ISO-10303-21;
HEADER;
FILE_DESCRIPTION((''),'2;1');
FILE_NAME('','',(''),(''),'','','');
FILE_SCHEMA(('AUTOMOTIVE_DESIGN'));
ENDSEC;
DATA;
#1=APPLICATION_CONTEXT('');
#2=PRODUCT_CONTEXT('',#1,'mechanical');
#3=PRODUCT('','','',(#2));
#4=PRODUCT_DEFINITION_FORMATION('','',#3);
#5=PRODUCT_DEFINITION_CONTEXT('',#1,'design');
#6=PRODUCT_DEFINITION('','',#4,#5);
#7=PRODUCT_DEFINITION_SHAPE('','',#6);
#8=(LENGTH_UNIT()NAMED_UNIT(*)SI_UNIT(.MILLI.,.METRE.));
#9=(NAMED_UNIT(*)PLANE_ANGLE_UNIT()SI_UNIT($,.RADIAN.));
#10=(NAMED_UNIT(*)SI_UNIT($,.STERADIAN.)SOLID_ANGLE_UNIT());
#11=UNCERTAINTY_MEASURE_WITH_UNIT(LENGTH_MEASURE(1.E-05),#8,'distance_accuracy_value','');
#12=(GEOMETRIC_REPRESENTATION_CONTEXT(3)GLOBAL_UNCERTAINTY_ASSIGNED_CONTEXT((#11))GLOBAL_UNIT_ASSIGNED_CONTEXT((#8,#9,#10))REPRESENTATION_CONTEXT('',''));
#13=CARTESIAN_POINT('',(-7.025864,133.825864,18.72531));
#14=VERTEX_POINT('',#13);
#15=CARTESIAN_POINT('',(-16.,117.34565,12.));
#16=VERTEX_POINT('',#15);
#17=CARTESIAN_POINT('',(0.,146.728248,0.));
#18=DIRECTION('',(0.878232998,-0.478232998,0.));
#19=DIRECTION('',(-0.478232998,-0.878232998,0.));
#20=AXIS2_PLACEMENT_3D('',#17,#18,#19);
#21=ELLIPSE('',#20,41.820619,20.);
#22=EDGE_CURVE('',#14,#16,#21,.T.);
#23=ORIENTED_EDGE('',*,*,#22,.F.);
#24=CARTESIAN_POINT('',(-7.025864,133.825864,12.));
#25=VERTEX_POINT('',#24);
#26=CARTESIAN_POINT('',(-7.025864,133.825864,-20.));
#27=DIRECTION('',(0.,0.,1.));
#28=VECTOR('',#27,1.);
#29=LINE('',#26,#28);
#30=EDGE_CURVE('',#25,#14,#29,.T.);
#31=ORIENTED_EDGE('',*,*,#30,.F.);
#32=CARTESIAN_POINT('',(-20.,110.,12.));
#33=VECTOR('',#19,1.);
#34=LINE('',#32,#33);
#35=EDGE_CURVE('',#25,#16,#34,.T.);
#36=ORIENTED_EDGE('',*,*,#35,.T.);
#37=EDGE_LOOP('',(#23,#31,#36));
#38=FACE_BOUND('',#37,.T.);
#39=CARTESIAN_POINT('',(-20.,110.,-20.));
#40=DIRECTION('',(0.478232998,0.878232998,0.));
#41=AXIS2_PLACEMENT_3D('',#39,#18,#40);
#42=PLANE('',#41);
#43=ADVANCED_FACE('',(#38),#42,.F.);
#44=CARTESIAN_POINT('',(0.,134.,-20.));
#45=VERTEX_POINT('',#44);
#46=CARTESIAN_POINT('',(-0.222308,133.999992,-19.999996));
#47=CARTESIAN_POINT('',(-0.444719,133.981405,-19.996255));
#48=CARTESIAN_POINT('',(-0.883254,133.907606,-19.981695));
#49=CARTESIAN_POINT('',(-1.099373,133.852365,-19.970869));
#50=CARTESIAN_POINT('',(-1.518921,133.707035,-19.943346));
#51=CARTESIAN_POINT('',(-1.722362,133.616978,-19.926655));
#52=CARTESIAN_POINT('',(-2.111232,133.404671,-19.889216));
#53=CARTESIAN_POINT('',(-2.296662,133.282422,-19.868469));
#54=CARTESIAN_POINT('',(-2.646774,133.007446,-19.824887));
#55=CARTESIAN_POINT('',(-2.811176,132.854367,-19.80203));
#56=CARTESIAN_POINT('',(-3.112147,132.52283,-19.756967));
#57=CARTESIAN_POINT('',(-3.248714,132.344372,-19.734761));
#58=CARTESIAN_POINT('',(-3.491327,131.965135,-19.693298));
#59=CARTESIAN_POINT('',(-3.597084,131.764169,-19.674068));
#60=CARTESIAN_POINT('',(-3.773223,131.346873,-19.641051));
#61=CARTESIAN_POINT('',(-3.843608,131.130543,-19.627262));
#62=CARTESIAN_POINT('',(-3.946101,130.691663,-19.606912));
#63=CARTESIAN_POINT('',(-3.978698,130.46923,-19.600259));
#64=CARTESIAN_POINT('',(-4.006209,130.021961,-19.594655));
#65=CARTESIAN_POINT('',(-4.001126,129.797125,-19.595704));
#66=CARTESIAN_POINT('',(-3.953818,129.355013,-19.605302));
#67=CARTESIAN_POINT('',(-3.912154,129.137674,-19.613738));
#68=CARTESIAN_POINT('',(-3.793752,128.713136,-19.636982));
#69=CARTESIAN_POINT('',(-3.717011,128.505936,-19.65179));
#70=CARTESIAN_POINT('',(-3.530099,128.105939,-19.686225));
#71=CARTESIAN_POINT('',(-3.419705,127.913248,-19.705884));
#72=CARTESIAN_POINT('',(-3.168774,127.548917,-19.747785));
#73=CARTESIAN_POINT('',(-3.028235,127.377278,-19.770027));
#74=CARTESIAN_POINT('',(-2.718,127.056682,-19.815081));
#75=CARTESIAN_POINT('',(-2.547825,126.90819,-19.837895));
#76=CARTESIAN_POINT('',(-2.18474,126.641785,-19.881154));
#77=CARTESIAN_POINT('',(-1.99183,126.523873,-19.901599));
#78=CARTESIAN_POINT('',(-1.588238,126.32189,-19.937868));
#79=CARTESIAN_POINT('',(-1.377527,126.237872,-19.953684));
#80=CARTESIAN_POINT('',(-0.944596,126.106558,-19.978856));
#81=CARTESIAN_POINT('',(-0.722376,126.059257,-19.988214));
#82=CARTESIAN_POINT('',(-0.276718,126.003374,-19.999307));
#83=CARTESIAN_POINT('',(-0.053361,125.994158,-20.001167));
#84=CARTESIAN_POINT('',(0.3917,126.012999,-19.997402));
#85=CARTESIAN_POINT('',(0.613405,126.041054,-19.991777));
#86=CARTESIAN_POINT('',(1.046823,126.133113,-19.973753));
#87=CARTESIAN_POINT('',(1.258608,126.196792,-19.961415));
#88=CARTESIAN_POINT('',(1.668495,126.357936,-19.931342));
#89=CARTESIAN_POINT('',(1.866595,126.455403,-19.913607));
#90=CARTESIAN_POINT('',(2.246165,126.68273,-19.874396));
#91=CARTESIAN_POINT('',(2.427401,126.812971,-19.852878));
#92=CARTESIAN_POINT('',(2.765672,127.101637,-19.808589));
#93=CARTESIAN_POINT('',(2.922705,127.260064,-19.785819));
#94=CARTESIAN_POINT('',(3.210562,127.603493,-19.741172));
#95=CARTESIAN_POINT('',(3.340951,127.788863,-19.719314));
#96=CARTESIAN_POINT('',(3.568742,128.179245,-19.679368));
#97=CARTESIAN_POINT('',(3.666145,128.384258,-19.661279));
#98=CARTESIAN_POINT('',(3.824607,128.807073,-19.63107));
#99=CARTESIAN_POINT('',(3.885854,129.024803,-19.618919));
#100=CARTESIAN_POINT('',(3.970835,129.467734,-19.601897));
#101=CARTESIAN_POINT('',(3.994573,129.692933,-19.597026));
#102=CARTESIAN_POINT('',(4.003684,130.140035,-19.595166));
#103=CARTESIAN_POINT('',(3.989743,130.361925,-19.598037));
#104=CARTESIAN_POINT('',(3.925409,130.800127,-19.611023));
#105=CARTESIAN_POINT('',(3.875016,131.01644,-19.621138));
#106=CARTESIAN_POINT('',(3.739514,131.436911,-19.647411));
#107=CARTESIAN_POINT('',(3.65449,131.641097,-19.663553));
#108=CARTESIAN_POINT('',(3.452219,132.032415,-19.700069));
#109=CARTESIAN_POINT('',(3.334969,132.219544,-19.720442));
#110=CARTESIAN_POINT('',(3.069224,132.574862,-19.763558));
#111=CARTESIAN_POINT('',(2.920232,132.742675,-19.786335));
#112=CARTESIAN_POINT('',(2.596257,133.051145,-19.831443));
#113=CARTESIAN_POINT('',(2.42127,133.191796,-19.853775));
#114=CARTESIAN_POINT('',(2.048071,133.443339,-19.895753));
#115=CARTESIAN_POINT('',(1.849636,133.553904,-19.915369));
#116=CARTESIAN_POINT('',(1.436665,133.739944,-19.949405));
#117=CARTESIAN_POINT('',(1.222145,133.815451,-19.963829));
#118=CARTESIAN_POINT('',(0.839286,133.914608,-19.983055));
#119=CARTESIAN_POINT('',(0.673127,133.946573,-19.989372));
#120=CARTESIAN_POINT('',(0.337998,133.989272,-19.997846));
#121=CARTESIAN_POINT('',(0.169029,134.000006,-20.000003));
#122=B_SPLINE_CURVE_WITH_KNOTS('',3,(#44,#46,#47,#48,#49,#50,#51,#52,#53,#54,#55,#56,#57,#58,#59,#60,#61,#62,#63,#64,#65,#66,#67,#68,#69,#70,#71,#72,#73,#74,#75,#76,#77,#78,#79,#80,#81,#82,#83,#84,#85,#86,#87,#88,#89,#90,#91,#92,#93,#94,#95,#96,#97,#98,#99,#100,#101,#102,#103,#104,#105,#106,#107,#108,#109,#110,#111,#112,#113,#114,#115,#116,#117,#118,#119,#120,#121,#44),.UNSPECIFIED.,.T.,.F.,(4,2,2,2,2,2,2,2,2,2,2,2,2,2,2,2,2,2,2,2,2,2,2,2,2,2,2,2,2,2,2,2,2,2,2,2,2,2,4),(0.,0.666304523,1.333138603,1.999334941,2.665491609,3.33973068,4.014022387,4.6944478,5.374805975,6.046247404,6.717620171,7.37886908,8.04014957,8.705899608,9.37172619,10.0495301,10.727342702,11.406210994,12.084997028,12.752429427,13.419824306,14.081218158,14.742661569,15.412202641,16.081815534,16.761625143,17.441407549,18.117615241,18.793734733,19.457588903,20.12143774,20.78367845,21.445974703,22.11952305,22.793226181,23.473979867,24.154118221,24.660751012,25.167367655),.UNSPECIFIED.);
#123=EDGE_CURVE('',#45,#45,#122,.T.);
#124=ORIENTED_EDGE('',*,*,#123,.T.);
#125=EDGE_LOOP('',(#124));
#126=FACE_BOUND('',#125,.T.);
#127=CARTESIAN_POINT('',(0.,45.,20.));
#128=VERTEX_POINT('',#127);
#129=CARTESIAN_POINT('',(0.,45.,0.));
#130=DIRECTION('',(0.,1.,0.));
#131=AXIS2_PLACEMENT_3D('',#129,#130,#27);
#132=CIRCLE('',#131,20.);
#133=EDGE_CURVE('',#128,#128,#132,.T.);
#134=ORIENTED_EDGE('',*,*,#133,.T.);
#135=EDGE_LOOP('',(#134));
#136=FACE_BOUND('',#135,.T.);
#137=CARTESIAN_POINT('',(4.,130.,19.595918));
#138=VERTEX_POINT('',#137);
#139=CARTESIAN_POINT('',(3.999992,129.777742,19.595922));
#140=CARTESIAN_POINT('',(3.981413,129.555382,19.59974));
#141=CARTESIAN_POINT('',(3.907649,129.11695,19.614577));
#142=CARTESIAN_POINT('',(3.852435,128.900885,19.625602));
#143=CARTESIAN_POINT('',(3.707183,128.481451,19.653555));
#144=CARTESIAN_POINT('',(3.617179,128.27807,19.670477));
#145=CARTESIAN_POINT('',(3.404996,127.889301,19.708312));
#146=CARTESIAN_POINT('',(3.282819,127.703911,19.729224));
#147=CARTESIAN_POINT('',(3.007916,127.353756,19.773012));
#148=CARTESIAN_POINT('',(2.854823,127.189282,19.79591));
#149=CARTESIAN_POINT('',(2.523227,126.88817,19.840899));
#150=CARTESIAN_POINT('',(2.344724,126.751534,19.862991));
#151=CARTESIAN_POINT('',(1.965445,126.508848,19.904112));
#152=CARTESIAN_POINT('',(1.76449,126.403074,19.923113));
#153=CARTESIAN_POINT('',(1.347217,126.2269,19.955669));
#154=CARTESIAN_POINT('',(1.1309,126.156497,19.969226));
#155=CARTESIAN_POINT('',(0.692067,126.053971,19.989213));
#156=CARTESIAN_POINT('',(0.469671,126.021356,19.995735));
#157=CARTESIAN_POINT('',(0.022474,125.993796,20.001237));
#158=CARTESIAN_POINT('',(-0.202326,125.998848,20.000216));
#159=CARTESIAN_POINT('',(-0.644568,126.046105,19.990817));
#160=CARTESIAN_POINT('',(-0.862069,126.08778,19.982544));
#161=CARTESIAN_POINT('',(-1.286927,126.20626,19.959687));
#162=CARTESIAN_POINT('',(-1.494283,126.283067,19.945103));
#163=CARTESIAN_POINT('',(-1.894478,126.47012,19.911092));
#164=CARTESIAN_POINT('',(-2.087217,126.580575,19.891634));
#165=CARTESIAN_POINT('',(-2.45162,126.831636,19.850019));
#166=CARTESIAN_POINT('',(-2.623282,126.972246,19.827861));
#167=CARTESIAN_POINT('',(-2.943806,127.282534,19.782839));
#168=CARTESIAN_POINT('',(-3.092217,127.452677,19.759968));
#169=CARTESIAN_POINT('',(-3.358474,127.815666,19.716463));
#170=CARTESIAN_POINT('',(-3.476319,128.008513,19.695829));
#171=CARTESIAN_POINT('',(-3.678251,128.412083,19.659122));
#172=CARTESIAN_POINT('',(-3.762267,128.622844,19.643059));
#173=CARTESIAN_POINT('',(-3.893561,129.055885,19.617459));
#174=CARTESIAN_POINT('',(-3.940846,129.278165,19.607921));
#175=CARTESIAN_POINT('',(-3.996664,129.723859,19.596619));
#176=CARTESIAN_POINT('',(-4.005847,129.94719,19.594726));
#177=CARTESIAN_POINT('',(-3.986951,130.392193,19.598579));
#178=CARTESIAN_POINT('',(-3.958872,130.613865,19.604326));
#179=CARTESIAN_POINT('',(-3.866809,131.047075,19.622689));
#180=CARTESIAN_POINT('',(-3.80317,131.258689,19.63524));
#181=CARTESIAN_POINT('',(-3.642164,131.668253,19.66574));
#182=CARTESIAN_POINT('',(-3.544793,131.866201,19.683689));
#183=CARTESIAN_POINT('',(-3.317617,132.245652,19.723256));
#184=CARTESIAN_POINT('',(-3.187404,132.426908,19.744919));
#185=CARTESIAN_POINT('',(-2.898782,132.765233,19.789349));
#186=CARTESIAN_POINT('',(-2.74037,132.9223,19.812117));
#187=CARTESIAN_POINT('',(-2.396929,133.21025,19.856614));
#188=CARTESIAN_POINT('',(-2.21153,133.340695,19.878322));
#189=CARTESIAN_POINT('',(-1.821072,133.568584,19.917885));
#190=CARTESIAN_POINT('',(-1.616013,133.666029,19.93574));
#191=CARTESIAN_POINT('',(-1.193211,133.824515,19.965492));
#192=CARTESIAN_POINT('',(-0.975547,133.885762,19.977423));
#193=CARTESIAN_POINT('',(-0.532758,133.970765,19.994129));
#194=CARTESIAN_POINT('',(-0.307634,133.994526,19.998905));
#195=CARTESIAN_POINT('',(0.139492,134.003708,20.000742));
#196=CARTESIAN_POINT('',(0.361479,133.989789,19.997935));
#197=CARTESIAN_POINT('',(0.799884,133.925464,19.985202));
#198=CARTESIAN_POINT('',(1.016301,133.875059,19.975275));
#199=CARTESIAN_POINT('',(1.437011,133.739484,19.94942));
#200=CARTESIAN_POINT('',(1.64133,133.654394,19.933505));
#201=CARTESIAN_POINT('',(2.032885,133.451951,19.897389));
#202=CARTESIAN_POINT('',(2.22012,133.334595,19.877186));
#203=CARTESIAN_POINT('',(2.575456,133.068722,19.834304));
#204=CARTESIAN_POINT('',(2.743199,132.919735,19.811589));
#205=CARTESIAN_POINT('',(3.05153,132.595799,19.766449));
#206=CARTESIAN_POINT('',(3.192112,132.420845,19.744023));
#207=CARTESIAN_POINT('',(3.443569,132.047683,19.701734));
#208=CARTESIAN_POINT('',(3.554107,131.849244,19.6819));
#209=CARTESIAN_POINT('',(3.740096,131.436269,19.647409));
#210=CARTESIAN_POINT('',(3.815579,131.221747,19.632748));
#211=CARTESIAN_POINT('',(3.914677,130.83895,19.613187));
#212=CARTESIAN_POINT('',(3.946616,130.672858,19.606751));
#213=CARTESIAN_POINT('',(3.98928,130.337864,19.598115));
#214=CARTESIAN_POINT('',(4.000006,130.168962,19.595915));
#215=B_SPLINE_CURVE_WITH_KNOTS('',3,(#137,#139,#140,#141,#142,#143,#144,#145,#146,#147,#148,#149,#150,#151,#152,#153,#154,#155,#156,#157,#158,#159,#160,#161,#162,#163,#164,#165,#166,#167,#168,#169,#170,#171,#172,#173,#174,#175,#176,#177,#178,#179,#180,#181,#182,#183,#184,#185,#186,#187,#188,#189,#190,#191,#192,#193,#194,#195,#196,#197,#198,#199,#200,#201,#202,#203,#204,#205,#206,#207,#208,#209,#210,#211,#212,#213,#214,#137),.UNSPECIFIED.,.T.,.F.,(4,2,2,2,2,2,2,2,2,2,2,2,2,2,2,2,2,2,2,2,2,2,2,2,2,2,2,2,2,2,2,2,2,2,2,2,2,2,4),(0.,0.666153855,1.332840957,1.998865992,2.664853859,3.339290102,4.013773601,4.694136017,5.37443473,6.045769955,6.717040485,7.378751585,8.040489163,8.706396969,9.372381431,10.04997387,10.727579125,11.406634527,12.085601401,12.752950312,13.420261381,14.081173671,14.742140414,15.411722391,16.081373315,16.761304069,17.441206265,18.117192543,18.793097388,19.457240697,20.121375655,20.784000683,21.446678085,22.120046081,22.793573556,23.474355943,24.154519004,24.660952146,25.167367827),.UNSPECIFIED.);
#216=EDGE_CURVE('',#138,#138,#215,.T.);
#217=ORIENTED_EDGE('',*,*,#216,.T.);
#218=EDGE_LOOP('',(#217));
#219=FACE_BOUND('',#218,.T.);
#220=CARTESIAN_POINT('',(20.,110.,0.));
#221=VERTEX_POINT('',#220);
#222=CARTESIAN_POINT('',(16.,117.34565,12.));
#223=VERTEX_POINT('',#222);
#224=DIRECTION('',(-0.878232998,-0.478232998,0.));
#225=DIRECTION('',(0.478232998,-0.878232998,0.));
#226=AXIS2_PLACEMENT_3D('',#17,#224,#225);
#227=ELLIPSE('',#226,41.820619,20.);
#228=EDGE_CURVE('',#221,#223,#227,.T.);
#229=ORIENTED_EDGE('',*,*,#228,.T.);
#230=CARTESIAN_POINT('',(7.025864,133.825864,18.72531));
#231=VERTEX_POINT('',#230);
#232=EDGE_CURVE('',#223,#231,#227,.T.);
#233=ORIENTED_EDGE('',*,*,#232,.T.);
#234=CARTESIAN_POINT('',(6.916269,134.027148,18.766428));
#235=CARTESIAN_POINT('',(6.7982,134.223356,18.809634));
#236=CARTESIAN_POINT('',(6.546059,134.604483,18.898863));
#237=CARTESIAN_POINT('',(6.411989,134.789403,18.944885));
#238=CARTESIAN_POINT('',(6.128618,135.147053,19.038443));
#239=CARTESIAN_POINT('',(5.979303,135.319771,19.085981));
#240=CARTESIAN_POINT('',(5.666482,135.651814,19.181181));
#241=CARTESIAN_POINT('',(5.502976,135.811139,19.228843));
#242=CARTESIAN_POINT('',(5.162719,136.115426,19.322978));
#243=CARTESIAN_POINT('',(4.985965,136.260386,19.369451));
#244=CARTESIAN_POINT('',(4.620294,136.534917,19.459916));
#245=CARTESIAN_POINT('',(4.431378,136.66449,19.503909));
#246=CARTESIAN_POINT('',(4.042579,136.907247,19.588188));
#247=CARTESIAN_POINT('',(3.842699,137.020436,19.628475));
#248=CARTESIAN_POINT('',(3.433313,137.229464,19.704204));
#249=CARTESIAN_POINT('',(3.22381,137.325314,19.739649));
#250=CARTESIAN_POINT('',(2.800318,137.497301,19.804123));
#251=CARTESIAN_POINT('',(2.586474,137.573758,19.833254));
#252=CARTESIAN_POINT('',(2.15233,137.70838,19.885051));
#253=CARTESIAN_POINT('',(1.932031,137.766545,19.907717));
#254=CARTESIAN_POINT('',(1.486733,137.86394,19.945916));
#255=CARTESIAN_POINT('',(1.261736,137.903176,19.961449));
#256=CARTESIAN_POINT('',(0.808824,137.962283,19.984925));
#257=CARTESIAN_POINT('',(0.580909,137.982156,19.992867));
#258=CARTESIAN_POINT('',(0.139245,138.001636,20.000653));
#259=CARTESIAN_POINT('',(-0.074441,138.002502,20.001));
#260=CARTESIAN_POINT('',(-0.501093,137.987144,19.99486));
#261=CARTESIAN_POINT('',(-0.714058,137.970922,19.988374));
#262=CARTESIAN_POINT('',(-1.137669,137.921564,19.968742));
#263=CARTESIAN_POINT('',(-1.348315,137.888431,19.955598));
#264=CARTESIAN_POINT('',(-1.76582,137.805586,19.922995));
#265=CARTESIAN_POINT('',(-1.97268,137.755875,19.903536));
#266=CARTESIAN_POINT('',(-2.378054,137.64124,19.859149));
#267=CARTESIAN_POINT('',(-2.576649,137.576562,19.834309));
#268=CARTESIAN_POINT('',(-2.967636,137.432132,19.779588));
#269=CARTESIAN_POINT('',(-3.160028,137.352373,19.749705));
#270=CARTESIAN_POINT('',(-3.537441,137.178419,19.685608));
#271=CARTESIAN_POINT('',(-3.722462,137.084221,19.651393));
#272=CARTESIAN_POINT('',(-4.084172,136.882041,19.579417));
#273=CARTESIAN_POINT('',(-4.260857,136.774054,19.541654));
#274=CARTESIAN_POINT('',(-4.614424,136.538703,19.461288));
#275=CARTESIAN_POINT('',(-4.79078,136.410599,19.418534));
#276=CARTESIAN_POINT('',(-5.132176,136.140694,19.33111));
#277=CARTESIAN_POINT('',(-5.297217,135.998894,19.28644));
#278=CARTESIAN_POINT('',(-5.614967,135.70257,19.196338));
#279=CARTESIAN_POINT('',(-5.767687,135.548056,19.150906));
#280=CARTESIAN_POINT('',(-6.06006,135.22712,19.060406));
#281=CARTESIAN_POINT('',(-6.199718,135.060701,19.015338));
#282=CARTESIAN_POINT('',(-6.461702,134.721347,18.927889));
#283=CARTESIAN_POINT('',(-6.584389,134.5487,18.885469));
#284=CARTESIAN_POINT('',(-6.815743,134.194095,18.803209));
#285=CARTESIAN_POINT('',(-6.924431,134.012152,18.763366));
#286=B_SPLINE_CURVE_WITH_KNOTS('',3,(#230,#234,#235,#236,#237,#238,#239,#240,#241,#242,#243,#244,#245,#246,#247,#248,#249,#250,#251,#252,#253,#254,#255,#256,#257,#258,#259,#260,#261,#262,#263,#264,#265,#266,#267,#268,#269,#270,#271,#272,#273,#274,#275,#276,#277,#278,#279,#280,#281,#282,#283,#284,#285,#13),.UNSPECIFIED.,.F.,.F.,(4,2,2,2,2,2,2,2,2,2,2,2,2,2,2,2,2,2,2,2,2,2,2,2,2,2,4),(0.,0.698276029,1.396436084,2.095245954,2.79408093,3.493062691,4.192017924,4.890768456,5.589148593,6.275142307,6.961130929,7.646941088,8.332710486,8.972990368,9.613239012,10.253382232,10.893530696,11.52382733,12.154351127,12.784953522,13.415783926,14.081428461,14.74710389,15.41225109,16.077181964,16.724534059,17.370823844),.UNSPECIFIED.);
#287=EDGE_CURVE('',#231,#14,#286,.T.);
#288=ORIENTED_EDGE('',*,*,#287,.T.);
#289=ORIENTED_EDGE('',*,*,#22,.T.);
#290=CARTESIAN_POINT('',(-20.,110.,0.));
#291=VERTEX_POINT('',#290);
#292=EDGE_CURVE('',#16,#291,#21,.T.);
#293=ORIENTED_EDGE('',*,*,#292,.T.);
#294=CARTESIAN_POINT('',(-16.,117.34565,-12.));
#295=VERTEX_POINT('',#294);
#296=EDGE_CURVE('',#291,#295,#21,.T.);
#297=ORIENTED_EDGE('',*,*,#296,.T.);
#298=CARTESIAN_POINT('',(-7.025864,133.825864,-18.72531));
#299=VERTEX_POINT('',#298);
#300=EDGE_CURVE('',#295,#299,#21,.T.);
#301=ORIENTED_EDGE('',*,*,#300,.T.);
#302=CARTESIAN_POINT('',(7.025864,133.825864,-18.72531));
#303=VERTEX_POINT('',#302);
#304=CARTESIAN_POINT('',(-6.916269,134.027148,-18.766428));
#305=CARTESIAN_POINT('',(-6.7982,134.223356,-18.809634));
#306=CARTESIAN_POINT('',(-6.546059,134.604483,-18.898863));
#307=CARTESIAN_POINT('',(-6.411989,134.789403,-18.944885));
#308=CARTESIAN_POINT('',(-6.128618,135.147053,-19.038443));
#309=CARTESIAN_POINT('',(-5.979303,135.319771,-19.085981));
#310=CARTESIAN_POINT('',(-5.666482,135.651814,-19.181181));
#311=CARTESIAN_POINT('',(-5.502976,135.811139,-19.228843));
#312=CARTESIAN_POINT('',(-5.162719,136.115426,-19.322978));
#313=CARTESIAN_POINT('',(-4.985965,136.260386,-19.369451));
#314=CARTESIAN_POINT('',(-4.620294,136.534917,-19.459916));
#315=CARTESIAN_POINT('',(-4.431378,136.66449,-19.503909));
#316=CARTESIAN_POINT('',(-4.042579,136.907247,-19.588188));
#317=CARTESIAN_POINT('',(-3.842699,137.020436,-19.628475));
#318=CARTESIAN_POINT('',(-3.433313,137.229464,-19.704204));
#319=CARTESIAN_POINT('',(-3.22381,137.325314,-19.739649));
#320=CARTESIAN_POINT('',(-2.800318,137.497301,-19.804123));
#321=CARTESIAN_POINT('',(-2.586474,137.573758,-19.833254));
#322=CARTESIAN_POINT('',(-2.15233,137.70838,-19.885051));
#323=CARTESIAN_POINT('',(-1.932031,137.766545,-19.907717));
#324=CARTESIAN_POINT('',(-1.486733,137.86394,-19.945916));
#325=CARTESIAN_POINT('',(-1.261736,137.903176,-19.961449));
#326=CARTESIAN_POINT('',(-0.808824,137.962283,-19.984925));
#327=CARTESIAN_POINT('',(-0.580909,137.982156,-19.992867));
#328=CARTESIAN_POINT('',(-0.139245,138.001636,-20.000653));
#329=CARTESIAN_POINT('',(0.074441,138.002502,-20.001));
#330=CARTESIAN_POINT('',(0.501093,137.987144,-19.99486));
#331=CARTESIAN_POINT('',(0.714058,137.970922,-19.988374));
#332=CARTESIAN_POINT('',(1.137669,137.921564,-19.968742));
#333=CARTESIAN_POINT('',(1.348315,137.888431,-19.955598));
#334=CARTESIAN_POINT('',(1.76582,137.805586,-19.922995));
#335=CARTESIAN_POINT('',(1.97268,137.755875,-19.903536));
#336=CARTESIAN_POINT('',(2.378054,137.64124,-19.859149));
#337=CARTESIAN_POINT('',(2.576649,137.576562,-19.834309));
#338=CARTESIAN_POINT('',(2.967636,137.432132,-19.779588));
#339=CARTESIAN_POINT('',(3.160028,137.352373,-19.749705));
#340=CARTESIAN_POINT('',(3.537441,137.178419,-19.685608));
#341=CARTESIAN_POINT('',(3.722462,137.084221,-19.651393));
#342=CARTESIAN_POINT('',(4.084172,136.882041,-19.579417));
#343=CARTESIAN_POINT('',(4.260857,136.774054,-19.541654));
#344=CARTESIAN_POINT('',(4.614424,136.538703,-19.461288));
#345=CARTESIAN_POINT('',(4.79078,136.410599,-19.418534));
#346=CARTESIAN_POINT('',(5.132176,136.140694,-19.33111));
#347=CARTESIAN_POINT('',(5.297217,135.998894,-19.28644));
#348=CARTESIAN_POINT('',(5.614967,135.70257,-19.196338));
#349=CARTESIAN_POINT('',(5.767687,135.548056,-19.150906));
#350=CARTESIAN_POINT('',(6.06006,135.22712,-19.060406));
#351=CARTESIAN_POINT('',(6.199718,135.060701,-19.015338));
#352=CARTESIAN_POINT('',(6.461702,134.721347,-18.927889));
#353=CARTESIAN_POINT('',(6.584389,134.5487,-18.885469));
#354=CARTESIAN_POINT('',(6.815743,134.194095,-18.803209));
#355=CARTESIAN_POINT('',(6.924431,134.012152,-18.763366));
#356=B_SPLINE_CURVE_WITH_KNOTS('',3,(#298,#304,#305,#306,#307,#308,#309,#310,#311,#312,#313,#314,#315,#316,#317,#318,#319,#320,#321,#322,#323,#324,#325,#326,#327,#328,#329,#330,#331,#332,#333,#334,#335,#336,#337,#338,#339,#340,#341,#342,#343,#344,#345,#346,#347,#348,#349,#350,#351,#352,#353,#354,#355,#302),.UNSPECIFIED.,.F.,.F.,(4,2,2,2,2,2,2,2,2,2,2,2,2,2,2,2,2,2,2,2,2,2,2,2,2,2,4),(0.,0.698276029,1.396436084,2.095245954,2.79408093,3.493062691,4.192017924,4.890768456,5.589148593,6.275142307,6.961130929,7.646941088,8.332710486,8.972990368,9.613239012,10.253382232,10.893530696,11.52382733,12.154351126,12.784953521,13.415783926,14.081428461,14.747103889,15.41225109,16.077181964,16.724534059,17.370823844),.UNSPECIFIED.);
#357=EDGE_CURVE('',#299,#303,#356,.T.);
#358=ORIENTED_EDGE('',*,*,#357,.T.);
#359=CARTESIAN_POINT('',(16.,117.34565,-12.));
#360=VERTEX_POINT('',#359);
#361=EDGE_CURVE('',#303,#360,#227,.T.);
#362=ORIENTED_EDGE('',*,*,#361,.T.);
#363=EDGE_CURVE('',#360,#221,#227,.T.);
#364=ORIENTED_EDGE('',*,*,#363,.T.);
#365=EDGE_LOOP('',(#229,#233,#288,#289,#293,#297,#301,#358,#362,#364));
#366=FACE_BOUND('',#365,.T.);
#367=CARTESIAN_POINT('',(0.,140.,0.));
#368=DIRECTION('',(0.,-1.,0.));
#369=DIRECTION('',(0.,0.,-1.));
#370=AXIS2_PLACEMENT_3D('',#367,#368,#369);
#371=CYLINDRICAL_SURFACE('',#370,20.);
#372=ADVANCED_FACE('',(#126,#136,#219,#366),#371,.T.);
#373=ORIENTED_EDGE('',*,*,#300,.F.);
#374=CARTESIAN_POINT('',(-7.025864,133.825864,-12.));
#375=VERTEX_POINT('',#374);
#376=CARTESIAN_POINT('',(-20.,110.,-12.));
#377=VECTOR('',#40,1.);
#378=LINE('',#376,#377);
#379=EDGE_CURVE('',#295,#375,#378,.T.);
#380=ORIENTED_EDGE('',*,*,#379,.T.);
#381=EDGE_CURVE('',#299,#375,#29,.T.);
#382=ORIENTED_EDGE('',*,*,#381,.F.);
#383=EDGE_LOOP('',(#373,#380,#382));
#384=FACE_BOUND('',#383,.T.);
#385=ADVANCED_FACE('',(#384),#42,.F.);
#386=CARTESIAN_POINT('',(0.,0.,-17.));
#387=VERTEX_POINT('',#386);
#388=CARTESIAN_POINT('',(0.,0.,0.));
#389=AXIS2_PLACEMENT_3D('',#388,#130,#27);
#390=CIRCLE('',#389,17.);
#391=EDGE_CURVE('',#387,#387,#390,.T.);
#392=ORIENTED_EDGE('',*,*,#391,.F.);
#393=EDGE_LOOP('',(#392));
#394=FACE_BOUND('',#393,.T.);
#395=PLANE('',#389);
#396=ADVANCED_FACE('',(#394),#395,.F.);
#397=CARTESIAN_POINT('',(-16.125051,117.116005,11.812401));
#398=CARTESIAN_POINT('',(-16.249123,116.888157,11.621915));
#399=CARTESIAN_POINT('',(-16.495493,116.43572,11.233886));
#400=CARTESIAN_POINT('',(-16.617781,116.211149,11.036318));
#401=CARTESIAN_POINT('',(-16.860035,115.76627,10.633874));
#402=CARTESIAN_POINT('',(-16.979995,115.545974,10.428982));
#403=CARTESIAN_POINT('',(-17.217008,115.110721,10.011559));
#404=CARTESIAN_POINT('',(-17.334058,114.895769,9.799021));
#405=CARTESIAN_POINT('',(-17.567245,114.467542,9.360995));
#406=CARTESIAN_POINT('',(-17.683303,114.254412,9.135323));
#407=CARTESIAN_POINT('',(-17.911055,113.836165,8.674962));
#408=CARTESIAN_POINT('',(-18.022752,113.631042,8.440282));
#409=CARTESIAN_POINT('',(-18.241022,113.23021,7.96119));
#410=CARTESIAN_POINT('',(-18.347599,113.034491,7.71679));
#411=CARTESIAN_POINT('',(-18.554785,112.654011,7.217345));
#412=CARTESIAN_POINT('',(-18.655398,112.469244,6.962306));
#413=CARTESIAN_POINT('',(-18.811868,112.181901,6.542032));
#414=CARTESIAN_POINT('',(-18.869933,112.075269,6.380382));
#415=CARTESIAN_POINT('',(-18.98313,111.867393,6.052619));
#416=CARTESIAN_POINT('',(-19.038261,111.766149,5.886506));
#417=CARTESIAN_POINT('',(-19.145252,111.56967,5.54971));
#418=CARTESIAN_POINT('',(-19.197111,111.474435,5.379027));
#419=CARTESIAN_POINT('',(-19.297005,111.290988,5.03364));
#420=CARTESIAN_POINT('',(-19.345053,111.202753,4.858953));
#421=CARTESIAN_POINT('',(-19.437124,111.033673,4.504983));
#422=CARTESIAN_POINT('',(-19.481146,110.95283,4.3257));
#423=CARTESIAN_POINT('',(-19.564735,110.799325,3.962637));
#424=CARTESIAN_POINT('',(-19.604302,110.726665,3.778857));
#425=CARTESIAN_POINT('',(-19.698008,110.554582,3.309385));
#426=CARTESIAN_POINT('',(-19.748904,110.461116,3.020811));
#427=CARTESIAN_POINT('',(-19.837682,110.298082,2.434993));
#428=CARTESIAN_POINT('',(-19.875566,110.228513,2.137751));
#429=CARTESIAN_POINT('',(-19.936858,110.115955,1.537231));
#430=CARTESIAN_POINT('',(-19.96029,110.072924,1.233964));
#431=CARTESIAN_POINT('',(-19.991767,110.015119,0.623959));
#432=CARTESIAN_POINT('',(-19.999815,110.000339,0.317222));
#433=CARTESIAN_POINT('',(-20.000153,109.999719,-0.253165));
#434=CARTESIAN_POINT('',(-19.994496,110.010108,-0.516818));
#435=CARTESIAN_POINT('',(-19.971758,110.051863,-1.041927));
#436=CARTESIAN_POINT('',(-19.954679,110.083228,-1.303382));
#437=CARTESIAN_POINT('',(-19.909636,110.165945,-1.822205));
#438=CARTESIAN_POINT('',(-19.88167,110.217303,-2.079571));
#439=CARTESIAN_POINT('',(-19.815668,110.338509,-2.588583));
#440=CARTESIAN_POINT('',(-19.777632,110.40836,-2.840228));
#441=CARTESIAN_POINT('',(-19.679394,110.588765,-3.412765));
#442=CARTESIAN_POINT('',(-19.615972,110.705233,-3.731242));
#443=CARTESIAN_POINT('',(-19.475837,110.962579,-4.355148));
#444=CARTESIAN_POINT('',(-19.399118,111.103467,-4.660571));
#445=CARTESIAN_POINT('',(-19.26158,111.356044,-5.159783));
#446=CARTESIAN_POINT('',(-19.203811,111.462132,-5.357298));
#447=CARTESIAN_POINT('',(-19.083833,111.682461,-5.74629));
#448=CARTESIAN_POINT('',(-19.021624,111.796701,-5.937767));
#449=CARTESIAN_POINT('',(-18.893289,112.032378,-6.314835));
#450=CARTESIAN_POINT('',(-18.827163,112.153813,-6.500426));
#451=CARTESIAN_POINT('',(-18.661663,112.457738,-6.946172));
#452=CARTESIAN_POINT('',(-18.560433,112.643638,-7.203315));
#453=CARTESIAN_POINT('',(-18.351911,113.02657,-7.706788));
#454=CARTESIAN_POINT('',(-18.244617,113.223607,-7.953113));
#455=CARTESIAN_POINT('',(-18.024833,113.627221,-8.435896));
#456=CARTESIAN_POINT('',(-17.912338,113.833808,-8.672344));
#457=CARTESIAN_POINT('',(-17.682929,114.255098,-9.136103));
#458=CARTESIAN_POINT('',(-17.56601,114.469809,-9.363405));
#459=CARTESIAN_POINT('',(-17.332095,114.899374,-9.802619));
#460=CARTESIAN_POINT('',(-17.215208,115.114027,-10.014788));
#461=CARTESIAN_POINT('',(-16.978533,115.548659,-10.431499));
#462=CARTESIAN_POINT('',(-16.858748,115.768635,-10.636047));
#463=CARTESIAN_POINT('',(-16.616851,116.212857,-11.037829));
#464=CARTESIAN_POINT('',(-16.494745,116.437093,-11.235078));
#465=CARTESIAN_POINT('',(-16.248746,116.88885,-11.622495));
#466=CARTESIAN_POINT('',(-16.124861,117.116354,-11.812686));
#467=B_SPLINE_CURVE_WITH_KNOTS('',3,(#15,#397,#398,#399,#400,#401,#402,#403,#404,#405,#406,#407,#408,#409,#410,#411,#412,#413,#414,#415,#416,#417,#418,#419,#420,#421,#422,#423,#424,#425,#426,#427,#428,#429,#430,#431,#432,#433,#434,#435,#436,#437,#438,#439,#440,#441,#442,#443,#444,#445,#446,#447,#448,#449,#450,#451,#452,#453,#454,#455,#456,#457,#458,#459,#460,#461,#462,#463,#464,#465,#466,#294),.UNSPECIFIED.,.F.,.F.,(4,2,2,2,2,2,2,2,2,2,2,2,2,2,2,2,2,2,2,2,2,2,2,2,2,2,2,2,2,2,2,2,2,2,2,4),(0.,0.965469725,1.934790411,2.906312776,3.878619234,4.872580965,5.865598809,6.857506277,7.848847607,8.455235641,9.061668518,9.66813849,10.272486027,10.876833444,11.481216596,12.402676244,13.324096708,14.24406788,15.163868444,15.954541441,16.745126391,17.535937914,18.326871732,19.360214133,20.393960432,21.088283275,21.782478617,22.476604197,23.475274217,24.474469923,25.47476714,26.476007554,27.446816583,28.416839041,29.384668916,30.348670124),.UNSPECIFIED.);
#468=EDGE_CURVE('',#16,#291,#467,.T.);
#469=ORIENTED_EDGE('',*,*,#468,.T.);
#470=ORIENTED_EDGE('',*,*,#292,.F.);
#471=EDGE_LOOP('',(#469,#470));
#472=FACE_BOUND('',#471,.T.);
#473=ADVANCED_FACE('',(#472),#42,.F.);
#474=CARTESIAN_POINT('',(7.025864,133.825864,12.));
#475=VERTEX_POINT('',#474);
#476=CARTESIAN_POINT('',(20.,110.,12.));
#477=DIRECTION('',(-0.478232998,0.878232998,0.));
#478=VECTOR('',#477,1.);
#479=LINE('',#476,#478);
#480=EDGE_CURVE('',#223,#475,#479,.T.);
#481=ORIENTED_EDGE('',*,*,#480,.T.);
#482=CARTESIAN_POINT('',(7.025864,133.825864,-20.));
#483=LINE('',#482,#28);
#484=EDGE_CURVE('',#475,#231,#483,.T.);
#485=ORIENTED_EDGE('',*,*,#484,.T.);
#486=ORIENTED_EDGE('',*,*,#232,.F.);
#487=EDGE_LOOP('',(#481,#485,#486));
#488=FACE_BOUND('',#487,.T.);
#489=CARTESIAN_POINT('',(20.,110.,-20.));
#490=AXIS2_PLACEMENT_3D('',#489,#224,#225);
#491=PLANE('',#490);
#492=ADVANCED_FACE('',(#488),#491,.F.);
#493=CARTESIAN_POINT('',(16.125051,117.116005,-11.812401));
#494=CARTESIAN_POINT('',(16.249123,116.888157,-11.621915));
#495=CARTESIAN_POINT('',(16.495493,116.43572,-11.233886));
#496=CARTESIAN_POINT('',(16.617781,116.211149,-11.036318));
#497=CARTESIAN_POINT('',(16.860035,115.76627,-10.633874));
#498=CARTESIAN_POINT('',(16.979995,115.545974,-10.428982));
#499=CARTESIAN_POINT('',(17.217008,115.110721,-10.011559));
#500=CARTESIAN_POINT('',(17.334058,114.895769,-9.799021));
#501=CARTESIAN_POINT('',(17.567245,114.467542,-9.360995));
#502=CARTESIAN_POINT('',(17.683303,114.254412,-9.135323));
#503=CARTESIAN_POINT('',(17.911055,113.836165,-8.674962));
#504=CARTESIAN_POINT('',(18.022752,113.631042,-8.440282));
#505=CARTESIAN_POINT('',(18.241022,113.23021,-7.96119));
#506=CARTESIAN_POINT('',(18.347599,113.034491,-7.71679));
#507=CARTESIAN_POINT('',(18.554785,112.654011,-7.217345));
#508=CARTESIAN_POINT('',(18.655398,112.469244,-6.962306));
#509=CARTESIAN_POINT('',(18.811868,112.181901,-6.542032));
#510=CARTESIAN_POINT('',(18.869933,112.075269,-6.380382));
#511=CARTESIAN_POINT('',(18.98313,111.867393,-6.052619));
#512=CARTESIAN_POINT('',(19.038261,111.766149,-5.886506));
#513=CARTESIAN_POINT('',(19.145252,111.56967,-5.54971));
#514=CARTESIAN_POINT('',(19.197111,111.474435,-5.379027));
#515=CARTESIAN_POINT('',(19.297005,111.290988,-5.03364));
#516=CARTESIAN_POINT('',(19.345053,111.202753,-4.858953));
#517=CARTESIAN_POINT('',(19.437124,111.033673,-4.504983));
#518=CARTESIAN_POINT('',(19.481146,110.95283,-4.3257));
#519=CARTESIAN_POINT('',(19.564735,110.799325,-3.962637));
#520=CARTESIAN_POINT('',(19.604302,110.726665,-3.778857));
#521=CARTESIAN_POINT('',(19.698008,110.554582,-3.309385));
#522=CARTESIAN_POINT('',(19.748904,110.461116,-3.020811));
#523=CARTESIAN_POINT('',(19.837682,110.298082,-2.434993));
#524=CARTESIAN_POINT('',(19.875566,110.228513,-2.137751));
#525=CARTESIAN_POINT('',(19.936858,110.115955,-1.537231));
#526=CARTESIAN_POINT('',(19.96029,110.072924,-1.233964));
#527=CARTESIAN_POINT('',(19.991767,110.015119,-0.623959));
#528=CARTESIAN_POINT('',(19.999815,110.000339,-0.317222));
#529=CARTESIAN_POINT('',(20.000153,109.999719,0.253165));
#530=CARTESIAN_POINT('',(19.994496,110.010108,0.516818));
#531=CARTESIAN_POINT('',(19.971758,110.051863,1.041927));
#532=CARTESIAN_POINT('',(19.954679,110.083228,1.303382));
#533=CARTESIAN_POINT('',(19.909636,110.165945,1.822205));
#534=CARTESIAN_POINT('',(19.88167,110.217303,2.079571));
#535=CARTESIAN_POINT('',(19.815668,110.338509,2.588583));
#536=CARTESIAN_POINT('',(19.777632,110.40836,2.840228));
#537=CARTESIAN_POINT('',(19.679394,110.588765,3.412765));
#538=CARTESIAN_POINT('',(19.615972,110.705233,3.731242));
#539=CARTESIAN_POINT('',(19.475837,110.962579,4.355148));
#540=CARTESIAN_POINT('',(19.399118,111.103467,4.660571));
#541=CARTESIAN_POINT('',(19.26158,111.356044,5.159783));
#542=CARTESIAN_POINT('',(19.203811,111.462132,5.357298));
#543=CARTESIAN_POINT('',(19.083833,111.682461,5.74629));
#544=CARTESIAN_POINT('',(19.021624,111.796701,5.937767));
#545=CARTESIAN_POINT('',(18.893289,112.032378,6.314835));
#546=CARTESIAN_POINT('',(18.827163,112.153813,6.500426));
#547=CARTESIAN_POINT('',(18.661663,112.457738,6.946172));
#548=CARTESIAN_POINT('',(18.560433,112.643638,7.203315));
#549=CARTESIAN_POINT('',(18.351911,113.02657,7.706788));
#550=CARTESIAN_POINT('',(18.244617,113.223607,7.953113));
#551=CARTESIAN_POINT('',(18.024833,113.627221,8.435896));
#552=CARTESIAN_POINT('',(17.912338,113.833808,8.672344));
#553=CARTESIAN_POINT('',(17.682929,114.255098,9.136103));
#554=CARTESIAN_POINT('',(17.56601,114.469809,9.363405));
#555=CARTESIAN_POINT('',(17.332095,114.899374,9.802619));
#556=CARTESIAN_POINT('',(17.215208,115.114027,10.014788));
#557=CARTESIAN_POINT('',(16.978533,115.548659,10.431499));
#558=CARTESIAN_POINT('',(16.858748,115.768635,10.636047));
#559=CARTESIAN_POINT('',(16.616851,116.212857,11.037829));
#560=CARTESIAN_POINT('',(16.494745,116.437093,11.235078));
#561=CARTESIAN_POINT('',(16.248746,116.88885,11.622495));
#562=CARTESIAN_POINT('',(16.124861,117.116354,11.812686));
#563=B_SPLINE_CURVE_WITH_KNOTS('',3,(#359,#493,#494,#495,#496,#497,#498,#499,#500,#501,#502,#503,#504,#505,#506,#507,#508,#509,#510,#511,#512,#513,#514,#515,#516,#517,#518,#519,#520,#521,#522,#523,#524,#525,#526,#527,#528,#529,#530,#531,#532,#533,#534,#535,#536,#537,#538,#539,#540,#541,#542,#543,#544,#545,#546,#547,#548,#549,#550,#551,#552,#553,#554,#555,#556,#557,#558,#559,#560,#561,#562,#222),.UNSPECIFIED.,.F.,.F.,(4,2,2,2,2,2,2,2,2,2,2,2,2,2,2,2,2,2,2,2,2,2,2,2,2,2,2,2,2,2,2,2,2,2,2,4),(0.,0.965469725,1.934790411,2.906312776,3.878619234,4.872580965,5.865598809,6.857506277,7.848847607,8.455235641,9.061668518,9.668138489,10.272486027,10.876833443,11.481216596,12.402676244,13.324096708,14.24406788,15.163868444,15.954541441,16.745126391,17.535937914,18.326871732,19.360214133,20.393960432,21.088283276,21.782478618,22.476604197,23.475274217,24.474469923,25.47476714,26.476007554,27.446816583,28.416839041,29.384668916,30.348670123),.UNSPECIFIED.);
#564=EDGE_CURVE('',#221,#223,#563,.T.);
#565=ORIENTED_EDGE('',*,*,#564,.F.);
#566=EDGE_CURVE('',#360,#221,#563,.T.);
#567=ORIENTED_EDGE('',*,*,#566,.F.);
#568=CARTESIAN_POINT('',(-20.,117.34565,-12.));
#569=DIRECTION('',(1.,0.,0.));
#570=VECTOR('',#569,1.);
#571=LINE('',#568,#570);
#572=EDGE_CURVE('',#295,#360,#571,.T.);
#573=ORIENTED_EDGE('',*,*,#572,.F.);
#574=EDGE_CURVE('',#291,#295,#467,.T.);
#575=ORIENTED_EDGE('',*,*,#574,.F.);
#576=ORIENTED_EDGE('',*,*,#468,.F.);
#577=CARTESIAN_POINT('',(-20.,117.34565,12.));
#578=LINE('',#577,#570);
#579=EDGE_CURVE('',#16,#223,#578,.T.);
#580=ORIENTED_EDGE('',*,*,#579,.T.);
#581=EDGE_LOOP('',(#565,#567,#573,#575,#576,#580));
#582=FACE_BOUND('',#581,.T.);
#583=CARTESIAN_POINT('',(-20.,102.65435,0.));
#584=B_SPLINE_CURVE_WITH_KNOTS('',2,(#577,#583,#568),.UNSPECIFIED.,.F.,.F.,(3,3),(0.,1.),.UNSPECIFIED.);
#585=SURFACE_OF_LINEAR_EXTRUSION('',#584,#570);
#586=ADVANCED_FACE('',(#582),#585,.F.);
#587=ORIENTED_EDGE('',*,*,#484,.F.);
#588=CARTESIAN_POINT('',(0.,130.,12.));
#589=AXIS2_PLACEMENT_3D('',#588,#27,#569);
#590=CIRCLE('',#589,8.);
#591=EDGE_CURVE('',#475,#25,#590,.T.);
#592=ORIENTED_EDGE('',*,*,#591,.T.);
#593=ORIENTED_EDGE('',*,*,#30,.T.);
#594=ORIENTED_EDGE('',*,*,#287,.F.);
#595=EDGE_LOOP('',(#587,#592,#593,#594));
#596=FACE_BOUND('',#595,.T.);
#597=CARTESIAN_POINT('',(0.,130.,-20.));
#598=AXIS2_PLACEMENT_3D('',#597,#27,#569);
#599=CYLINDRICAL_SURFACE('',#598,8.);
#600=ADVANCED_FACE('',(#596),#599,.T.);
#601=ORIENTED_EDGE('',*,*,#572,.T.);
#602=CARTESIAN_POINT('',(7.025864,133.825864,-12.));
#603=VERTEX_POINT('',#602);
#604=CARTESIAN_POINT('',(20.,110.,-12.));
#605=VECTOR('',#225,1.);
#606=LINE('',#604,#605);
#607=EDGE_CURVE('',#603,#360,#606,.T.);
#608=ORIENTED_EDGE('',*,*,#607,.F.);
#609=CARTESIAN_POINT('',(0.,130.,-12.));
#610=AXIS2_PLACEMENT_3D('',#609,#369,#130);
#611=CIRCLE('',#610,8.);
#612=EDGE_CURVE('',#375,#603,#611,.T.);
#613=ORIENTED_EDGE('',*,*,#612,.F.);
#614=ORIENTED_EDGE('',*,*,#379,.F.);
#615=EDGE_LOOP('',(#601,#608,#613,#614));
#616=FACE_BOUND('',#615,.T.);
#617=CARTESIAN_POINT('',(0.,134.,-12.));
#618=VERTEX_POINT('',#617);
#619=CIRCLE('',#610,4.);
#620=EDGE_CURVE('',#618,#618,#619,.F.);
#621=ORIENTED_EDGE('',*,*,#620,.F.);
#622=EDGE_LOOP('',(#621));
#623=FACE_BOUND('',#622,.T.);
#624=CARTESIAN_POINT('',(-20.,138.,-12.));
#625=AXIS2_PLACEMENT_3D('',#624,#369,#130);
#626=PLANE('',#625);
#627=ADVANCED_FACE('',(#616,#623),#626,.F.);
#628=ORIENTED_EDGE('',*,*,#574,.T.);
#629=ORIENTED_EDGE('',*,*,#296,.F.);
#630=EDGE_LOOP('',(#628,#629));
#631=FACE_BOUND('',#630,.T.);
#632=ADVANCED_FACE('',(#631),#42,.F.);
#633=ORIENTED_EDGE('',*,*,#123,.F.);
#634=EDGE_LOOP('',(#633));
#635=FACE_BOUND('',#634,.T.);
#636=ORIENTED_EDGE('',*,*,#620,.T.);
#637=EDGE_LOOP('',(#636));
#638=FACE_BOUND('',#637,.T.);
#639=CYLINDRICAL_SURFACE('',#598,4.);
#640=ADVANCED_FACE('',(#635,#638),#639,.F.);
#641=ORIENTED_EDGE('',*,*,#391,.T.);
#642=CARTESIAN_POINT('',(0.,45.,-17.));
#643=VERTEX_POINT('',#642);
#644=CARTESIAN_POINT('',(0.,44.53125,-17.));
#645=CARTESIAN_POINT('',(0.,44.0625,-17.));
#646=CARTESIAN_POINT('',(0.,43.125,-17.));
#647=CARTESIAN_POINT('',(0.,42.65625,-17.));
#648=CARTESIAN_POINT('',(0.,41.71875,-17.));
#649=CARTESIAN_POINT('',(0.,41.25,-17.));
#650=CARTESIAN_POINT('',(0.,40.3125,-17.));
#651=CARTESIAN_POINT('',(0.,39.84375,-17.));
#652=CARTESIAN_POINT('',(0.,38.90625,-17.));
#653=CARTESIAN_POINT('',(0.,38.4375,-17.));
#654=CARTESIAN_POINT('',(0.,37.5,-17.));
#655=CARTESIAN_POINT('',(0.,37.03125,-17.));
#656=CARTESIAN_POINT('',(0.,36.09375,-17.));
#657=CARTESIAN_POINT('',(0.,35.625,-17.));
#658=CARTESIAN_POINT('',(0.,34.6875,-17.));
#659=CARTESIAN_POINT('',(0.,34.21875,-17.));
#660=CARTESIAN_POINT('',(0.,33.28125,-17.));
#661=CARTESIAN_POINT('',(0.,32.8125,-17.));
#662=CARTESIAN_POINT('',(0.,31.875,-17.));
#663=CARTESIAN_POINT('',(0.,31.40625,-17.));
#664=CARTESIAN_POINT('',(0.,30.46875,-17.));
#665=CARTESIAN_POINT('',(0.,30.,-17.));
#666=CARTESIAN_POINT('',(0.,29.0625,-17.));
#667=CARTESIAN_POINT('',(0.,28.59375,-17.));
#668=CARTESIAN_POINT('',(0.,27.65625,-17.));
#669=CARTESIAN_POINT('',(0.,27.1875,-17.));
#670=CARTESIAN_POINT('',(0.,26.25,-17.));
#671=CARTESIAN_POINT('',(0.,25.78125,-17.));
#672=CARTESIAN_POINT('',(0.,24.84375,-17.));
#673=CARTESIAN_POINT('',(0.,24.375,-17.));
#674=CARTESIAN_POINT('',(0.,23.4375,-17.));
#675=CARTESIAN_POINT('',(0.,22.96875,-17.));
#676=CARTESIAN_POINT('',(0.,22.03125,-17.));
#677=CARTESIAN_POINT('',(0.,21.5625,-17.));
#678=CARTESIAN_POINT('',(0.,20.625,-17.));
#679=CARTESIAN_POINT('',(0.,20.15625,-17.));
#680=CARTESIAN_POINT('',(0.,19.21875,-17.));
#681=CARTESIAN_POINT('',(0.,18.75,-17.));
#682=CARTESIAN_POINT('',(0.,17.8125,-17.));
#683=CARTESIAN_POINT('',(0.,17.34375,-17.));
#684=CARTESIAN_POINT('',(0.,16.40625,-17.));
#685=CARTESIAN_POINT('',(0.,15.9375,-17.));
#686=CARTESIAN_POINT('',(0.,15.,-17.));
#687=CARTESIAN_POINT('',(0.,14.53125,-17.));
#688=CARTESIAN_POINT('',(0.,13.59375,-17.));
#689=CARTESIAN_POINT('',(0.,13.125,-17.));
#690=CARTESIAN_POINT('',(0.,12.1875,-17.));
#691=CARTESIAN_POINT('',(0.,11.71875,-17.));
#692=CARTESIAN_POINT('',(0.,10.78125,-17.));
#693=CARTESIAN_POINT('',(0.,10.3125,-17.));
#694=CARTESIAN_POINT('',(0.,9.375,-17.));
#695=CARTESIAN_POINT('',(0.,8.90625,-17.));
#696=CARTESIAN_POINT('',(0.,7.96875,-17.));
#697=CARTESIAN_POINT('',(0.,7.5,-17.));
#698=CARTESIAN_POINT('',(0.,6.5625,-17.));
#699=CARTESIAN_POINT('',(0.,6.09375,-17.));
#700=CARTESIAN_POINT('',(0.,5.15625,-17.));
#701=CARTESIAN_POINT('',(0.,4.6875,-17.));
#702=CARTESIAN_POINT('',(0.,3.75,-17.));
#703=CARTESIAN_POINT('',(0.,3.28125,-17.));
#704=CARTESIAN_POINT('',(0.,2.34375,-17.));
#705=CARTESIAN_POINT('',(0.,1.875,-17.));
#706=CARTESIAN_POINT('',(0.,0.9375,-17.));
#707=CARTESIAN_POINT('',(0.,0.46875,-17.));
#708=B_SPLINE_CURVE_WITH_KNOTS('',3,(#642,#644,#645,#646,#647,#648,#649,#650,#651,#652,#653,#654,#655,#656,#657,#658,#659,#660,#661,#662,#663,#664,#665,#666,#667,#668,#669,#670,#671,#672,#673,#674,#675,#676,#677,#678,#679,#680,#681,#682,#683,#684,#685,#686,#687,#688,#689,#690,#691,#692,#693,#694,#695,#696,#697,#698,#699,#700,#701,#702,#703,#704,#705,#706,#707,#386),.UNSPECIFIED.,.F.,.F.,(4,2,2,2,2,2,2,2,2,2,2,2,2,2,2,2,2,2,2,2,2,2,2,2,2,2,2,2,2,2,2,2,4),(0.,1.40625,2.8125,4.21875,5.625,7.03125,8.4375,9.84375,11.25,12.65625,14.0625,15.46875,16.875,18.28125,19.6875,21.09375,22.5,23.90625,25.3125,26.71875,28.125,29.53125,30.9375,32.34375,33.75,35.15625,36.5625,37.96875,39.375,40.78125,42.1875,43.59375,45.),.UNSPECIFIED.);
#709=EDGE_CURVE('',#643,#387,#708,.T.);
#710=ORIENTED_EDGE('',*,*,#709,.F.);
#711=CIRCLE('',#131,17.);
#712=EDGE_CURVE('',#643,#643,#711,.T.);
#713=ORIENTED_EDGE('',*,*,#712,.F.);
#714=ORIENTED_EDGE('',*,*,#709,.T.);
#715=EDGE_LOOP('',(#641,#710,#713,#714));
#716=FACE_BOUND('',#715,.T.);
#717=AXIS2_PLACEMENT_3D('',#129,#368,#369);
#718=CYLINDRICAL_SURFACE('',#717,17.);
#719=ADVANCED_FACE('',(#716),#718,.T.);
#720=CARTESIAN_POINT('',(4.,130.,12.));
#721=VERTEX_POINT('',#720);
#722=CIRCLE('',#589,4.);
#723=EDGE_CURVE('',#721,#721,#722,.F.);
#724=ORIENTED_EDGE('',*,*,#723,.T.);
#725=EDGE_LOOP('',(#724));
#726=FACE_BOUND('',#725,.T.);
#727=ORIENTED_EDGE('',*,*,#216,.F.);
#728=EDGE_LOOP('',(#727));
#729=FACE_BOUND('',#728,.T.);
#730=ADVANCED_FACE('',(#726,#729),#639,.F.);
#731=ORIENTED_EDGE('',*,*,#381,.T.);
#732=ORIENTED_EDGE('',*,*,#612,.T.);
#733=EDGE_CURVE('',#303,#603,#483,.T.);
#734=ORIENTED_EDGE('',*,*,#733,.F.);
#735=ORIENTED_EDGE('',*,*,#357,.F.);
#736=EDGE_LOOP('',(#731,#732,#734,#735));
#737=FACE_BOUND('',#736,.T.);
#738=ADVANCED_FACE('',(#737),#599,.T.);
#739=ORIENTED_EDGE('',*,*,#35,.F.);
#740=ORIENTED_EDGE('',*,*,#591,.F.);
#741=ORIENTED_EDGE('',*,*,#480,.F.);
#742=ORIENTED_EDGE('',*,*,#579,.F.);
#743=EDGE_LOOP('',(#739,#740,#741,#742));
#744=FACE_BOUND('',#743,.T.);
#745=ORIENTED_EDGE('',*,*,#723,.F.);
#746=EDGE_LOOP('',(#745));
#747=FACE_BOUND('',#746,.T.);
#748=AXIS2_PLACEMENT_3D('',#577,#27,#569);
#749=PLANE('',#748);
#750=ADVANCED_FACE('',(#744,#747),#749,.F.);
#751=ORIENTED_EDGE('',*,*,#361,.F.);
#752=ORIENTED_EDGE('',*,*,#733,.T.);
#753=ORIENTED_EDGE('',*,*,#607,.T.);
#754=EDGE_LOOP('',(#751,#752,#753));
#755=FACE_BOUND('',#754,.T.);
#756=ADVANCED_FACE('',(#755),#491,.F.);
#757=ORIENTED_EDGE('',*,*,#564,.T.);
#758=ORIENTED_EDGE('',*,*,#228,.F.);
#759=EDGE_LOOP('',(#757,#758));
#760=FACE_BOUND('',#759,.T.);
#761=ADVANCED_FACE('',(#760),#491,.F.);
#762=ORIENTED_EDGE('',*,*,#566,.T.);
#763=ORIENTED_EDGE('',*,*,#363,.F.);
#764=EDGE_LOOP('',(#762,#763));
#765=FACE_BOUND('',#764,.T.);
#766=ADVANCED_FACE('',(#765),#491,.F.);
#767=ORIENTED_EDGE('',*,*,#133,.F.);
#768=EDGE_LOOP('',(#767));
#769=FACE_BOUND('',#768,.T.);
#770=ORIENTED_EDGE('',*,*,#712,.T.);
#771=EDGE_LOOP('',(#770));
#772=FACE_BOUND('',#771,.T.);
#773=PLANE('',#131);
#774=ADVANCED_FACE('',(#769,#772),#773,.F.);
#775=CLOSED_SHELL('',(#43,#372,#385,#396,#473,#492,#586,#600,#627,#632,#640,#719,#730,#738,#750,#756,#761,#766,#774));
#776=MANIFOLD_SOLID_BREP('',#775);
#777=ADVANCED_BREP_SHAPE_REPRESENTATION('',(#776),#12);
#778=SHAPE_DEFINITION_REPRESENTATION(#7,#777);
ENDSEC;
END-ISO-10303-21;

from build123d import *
from OCP.BRepAlgoAPI import BRepAlgoAPI_Cut
from OCP.TopTools import TopTools_ListOfShape

# Parameters (mm, degrees)
SKETCH_1_R          = 17
EXTRUDE_1_DEPTH     = 45
SKETCH_2_R          = 20
EXTRUDE_2_DEPTH     = 95
CUT_EXTRUDE_3_DEPTH = 20
SKETCH_9_R          = 4
CUT_EXTRUDE_4_DEPTH = 20
CUT_EXTRUDE_5_DEPTH = 20


with BuildPart() as part:
    # 草图1 → 凸台-拉伸1 (new body)
    with BuildSketch(Plane(origin=(0, 0, 0), x_dir=(1, 0, 0), z_dir=(0, 1, 0))):
        Circle(SKETCH_1_R)
    extrude(amount=EXTRUDE_1_DEPTH)

    # 草图2 → 凸台-拉伸2 (add)
    with BuildSketch(Plane(origin=(0, 45, 0), x_dir=(1, 0, 0), z_dir=(0, 1, 0))):
        Circle(SKETCH_2_R)
    extrude(amount=EXTRUDE_2_DEPTH)

    # 草图8 → 切除-拉伸3 (cut, symmetric)
    with BuildSketch(Plane.XY):
        with BuildLine():
            Line((-20, 110), (-7.025863986, 133.825863986))
            ThreePointArc((-7.025863986, 133.825863986), (0, 137.999999999), (7.025863987, 133.825863986))
            Line((7.025863987, 133.825863986), (20, 110))
            Line((20, 110), (20, 140))
            Line((20, 140), (-20, 140))
            Line((-20, 140), (-20, 110))
        make_face()
    extrude(amount=CUT_EXTRUDE_3_DEPTH, both=True, mode=Mode.SUBTRACT)

    # 草图9 → 切除-拉伸4 (cut, symmetric)
    with BuildSketch(Plane.XY):
        with Locations((0, 130)):
            Circle(SKETCH_9_R)
    extrude(amount=CUT_EXTRUDE_4_DEPTH, both=True, mode=Mode.SUBTRACT)


with BuildPart() as cut_extrude_5_tool:
    # 草图10 → 切除-拉伸5 (new, symmetric)
    with BuildSketch(Plane(origin=(0, 0, 0), x_dir=(0, 0, -1), z_dir=(1, 0, 0))):
        with BuildLine():
            Line((0, 137.999999999), (12, 137.999999999))
            Line((12, 137.999999999), (12, 117.345649517))
            add(Edge.make_bspline(
                [(-12, 117.345649517), (0, 102.654350483), (12, 117.345649517)],
                knots=[0, 0, 0, 1, 1, 1], degree=2))
            Line((-12, 117.345649517), (-12, 137.999999999))
            Line((-12, 137.999999999), (0, 137.999999999))
        make_face()
    extrude(amount=CUT_EXTRUDE_5_DEPTH, both=True)


with BuildPart() as part_1:
    add(part.part)

    # 切除-拉伸5: cut by cut_extrude_5_tool, with a tolerance
    cut_extrude_5_stock = TopTools_ListOfShape()
    cut_extrude_5_stock.Append(part_1.part.wrapped)
    cut_extrude_5_tools = TopTools_ListOfShape()
    cut_extrude_5_tools.Append(cut_extrude_5_tool.part.wrapped)
    cut_extrude_5_cut = BRepAlgoAPI_Cut()
    cut_extrude_5_cut.SetArguments(cut_extrude_5_stock)
    cut_extrude_5_cut.SetTools(cut_extrude_5_tools)
    cut_extrude_5_cut.SetFuzzyValue(0.00001)
    cut_extrude_5_cut.Build()
    add(Compound.cast(cut_extrude_5_cut.Shape()).solids(), mode=Mode.REPLACE)


solid = part_1.part
